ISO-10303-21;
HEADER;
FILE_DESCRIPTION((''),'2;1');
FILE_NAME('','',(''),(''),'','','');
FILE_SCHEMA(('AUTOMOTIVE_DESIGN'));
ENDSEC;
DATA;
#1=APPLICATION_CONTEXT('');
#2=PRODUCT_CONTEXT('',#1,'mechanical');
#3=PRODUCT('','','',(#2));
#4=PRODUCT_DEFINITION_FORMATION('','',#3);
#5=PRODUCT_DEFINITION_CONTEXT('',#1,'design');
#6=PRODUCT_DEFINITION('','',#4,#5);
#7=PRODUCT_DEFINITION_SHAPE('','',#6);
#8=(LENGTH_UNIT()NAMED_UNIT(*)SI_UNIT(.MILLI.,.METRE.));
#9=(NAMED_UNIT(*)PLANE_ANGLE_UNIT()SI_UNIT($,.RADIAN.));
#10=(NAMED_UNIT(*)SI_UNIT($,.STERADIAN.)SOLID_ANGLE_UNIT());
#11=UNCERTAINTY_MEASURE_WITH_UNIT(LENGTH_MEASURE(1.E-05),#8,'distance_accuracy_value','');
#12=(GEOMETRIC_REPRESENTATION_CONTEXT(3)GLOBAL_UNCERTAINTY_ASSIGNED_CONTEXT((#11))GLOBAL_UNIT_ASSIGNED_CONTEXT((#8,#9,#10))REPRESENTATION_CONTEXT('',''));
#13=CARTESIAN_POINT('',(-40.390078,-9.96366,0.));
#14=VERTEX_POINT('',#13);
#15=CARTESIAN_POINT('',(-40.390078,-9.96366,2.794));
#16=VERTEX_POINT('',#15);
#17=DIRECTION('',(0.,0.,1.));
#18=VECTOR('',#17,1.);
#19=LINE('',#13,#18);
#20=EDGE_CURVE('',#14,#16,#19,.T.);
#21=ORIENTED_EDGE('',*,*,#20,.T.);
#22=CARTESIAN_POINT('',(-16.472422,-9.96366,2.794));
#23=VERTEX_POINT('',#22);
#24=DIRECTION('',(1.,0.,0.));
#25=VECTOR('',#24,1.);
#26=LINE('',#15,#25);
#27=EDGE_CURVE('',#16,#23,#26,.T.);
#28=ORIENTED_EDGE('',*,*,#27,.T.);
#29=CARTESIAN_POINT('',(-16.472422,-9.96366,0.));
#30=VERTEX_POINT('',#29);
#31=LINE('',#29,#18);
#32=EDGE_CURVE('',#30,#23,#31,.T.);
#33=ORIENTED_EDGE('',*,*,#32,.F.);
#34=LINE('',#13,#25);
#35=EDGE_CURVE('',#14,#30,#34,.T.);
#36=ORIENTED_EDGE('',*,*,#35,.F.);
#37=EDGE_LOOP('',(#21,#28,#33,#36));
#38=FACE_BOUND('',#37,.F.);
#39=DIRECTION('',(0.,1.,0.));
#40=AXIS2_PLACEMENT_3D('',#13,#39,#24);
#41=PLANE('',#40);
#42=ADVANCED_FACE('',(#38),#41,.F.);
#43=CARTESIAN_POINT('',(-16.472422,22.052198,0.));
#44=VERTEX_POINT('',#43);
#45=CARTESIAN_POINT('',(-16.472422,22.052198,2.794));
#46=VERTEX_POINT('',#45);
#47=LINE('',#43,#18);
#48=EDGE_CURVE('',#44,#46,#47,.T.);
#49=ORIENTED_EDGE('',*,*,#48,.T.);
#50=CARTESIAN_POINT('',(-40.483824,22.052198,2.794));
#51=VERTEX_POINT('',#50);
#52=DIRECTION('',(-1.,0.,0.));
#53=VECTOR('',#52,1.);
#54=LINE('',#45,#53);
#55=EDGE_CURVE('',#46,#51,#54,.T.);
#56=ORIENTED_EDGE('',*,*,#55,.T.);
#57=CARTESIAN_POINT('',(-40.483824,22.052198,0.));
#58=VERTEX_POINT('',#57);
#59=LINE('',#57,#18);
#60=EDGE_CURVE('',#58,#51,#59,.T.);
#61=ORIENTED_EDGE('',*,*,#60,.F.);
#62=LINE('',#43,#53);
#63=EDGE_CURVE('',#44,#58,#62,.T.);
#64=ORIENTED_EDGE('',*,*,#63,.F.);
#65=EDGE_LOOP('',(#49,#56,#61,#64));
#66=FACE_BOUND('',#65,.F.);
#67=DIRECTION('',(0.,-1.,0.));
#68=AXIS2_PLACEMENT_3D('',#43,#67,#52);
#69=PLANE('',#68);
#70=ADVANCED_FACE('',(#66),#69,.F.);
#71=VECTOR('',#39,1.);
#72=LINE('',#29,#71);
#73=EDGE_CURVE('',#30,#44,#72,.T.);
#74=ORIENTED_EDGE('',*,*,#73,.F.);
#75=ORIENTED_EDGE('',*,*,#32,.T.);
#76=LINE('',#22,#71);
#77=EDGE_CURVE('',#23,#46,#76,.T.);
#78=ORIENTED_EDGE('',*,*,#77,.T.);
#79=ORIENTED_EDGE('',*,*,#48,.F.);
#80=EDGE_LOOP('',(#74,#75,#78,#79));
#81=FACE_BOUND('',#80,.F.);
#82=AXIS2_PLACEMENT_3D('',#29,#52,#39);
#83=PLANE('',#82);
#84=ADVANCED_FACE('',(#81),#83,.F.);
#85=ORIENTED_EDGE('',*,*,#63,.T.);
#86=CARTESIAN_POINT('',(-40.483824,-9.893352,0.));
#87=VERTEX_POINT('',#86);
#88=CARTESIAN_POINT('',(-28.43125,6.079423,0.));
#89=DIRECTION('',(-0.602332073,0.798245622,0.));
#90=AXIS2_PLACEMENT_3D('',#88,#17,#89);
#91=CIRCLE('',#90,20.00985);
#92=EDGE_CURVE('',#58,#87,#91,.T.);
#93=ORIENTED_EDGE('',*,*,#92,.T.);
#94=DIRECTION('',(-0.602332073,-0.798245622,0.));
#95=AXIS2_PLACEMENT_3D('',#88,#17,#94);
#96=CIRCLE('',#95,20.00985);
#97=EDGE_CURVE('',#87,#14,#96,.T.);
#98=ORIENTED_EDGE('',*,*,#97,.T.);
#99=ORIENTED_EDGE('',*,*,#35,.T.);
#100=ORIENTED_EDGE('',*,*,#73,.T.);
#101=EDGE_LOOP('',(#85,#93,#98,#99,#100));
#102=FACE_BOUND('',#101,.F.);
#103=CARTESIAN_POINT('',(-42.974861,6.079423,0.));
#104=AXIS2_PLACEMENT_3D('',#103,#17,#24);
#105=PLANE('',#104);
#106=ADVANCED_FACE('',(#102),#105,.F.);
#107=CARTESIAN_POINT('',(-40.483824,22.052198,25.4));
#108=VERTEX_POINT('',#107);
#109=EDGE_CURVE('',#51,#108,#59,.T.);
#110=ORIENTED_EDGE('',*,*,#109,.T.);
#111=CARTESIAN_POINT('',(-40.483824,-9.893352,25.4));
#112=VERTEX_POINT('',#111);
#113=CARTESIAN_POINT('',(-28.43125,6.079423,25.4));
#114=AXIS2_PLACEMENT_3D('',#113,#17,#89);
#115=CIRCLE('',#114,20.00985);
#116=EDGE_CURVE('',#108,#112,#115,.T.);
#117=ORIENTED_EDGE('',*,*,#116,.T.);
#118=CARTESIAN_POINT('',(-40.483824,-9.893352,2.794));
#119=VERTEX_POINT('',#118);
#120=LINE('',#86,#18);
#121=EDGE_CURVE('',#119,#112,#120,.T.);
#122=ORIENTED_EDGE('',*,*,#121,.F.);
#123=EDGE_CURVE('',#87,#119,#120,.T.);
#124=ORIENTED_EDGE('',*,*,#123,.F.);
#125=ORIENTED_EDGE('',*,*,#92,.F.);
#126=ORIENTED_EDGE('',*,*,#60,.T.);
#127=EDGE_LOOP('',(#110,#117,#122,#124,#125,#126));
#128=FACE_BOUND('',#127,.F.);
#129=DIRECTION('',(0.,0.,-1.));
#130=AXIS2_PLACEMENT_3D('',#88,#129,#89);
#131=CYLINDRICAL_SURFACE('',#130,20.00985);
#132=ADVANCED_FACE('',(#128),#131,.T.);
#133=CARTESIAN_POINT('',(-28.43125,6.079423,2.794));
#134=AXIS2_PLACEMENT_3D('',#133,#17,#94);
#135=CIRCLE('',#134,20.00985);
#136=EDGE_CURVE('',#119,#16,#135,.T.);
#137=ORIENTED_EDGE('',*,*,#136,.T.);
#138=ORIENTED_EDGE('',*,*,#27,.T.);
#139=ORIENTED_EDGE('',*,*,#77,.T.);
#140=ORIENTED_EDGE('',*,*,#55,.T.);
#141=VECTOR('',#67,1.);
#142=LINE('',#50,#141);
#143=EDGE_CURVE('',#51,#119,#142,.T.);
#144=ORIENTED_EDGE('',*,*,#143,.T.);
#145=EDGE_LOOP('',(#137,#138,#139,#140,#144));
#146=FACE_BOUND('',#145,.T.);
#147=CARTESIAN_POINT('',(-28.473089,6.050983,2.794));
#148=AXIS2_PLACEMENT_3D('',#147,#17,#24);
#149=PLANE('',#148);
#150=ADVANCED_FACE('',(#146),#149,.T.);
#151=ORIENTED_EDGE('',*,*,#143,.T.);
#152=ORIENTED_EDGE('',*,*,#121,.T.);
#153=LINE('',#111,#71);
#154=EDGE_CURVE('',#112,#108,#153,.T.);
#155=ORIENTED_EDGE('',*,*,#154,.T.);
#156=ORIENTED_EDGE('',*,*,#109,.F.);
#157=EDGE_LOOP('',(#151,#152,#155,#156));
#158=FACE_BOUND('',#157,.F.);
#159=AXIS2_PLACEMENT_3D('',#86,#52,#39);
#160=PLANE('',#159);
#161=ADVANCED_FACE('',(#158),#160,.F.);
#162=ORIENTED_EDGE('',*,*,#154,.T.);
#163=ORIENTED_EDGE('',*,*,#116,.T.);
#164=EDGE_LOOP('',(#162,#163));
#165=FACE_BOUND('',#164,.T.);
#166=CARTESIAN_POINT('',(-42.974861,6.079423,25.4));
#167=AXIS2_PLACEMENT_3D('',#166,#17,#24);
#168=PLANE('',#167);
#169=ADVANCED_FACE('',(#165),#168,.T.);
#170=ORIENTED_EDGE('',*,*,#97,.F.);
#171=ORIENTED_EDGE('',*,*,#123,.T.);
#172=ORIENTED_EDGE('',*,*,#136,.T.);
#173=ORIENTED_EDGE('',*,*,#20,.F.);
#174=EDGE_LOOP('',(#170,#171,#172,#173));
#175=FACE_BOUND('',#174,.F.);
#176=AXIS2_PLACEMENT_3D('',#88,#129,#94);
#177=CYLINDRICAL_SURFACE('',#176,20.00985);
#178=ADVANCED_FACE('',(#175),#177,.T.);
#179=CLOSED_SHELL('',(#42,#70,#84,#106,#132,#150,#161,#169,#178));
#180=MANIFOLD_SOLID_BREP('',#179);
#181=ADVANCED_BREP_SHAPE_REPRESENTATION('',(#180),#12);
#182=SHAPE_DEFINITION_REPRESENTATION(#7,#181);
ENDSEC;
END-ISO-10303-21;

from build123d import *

# Parameters (mm, degrees)
F1_DEPTH = 2.794
F5_DEPTH = 25.4


# Not quite as in the source:
# - a feature of the source that left no trace in its solid (it failed there, or was rolled back) is left out
# - the program builds the solid bodies; features that only make, move or delete a surface that nothing else refers to are left out


with BuildPart() as f1:
    # F0 (on Top) → F1 (new body)
    with BuildSketch(Plane.XY):
        with BuildLine():
            Line((-16.4724217036, 22.0521983965), (-40.4838242176, 22.0521983965))
            Line((-40.4838242176, 22.0521983965), (-40.4838242176, -9.8933519139))
            ThreePointArc((-40.4838242176, -9.8933519139), (-40.4370025072, -9.928574703), (-40.3900778613, -9.963660242))
            Line((-40.3900778613, -9.963660242), (-16.4724217036, -9.963660242))
            Line((-16.4724217036, -9.963660242), (-16.4724217036, 22.0521983965))
        make_face()
    extrude(amount=F1_DEPTH)

    # F0 (on Top) → F5 (join)
    with BuildSketch(Plane.XY):
        with BuildLine():
            Line((-40.4838242176, -9.8933519139), (-40.4838242176, 22.0521983965))
            ThreePointArc((-40.4838242176, 22.0521983965), (-48.4410997737, 6.0794232413), (-40.4838242176, -9.8933519139))
        make_face()
    extrude(amount=F5_DEPTH)


solid = f1.part
